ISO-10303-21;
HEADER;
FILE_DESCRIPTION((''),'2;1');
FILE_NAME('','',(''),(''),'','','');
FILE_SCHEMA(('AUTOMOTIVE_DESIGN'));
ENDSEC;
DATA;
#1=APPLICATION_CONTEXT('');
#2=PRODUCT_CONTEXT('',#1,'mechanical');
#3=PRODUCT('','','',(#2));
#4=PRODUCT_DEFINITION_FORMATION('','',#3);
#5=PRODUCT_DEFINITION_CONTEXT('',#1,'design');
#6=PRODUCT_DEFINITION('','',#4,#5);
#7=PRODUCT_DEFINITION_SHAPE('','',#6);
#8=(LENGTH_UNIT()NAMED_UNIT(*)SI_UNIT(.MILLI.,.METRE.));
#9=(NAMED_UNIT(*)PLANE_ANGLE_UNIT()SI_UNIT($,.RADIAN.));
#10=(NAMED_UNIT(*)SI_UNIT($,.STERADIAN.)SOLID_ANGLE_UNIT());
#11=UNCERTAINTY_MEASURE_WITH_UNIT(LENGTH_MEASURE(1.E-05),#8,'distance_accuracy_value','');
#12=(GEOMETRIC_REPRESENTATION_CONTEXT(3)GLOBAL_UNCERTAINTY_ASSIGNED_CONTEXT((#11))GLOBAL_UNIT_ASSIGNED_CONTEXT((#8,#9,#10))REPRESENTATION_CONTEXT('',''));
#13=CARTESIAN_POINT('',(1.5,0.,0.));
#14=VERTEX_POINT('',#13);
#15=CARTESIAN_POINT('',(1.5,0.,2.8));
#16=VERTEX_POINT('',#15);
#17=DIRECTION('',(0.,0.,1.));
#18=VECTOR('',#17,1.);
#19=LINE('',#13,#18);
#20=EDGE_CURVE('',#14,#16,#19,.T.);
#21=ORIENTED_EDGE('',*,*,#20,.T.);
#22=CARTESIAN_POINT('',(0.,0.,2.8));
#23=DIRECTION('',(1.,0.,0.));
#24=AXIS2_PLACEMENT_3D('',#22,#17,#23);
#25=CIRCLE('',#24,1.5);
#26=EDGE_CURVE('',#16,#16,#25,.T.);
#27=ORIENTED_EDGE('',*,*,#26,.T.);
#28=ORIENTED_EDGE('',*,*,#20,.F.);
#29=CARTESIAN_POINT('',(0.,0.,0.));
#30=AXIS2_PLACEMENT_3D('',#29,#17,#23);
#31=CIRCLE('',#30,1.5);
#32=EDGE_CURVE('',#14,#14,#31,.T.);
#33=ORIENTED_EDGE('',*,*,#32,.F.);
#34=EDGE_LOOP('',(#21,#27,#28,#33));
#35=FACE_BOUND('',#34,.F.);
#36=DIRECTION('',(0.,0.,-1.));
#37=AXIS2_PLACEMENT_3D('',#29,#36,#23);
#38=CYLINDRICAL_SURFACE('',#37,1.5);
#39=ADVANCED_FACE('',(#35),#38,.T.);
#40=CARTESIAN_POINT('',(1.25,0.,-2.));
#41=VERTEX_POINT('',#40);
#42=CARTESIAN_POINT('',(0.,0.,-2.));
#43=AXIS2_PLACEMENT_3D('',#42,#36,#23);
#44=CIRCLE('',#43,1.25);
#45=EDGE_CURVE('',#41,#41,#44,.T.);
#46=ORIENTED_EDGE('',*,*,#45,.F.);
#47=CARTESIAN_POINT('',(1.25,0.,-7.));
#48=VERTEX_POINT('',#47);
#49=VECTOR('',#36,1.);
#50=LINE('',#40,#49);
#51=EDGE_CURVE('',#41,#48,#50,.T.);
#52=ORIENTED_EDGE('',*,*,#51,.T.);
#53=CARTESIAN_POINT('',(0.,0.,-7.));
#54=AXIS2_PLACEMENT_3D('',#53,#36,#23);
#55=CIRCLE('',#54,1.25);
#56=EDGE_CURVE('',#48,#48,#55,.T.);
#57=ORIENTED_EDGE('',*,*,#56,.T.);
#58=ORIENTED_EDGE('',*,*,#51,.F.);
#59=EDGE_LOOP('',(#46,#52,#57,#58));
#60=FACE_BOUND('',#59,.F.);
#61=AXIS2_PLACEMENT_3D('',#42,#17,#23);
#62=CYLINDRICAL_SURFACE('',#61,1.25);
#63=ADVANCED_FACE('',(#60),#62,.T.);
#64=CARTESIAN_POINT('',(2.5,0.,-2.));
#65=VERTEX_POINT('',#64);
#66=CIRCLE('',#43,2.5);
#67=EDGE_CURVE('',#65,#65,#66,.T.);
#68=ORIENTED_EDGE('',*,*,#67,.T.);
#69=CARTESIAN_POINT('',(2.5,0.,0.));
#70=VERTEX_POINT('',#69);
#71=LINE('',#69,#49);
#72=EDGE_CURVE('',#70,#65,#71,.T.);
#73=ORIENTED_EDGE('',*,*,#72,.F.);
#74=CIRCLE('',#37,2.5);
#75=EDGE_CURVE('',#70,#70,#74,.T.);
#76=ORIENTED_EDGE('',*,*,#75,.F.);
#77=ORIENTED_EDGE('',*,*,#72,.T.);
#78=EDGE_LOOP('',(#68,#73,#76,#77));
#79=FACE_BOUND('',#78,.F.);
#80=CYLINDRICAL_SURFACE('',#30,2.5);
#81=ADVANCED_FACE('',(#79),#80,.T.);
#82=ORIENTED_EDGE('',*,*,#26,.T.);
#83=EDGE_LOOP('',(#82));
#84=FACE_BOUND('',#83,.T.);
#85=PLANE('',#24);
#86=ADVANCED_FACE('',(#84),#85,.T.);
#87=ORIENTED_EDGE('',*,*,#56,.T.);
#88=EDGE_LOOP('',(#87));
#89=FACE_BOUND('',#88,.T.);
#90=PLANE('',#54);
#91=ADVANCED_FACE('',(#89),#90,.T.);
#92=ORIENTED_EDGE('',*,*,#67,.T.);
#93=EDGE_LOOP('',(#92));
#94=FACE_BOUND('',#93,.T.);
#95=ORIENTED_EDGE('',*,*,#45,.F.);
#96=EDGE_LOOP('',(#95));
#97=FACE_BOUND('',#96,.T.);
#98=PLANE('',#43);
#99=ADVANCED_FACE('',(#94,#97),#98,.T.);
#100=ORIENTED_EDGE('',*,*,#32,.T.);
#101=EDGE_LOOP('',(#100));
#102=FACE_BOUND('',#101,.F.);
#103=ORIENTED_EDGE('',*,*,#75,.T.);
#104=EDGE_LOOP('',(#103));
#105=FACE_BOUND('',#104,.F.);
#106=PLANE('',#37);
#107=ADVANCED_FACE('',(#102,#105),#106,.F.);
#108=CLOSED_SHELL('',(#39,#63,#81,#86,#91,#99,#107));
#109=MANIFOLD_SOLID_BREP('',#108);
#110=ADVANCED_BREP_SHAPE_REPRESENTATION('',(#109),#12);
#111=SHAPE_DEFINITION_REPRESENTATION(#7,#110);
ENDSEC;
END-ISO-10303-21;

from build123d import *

# Parameters (mm, degrees)
F0_R     = 1.5
F1_DEPTH = 2.8
F2_R     = 2.5
F2_R_2   = 1.5
F3_DEPTH = 2
F4_R     = 1.25
F5_DEPTH = 5


with BuildPart() as f1:
    # F0 (on Top) → F1 (new body)
    with BuildSketch(Plane.XY):
        Circle(F0_R)
    extrude(amount=F1_DEPTH)

    # F2 (on face) → F3 (join)
    with BuildSketch(Plane(origin=(0, 0, 0), x_dir=(1, 0, 0), z_dir=(0, 0, -1))):
        Circle(F2_R)
        Circle(F2_R_2, mode=Mode.SUBTRACT)
        Circle(F2_R_2)
    extrude(amount=F3_DEPTH)

    # F4 (on face) → F5 (join)
    with BuildSketch(Plane(origin=(0, 0, -2), x_dir=(1, 0, 0), z_dir=(0, 0, -1))):
        Circle(F4_R)
    extrude(amount=F5_DEPTH)


solid = f1.part
